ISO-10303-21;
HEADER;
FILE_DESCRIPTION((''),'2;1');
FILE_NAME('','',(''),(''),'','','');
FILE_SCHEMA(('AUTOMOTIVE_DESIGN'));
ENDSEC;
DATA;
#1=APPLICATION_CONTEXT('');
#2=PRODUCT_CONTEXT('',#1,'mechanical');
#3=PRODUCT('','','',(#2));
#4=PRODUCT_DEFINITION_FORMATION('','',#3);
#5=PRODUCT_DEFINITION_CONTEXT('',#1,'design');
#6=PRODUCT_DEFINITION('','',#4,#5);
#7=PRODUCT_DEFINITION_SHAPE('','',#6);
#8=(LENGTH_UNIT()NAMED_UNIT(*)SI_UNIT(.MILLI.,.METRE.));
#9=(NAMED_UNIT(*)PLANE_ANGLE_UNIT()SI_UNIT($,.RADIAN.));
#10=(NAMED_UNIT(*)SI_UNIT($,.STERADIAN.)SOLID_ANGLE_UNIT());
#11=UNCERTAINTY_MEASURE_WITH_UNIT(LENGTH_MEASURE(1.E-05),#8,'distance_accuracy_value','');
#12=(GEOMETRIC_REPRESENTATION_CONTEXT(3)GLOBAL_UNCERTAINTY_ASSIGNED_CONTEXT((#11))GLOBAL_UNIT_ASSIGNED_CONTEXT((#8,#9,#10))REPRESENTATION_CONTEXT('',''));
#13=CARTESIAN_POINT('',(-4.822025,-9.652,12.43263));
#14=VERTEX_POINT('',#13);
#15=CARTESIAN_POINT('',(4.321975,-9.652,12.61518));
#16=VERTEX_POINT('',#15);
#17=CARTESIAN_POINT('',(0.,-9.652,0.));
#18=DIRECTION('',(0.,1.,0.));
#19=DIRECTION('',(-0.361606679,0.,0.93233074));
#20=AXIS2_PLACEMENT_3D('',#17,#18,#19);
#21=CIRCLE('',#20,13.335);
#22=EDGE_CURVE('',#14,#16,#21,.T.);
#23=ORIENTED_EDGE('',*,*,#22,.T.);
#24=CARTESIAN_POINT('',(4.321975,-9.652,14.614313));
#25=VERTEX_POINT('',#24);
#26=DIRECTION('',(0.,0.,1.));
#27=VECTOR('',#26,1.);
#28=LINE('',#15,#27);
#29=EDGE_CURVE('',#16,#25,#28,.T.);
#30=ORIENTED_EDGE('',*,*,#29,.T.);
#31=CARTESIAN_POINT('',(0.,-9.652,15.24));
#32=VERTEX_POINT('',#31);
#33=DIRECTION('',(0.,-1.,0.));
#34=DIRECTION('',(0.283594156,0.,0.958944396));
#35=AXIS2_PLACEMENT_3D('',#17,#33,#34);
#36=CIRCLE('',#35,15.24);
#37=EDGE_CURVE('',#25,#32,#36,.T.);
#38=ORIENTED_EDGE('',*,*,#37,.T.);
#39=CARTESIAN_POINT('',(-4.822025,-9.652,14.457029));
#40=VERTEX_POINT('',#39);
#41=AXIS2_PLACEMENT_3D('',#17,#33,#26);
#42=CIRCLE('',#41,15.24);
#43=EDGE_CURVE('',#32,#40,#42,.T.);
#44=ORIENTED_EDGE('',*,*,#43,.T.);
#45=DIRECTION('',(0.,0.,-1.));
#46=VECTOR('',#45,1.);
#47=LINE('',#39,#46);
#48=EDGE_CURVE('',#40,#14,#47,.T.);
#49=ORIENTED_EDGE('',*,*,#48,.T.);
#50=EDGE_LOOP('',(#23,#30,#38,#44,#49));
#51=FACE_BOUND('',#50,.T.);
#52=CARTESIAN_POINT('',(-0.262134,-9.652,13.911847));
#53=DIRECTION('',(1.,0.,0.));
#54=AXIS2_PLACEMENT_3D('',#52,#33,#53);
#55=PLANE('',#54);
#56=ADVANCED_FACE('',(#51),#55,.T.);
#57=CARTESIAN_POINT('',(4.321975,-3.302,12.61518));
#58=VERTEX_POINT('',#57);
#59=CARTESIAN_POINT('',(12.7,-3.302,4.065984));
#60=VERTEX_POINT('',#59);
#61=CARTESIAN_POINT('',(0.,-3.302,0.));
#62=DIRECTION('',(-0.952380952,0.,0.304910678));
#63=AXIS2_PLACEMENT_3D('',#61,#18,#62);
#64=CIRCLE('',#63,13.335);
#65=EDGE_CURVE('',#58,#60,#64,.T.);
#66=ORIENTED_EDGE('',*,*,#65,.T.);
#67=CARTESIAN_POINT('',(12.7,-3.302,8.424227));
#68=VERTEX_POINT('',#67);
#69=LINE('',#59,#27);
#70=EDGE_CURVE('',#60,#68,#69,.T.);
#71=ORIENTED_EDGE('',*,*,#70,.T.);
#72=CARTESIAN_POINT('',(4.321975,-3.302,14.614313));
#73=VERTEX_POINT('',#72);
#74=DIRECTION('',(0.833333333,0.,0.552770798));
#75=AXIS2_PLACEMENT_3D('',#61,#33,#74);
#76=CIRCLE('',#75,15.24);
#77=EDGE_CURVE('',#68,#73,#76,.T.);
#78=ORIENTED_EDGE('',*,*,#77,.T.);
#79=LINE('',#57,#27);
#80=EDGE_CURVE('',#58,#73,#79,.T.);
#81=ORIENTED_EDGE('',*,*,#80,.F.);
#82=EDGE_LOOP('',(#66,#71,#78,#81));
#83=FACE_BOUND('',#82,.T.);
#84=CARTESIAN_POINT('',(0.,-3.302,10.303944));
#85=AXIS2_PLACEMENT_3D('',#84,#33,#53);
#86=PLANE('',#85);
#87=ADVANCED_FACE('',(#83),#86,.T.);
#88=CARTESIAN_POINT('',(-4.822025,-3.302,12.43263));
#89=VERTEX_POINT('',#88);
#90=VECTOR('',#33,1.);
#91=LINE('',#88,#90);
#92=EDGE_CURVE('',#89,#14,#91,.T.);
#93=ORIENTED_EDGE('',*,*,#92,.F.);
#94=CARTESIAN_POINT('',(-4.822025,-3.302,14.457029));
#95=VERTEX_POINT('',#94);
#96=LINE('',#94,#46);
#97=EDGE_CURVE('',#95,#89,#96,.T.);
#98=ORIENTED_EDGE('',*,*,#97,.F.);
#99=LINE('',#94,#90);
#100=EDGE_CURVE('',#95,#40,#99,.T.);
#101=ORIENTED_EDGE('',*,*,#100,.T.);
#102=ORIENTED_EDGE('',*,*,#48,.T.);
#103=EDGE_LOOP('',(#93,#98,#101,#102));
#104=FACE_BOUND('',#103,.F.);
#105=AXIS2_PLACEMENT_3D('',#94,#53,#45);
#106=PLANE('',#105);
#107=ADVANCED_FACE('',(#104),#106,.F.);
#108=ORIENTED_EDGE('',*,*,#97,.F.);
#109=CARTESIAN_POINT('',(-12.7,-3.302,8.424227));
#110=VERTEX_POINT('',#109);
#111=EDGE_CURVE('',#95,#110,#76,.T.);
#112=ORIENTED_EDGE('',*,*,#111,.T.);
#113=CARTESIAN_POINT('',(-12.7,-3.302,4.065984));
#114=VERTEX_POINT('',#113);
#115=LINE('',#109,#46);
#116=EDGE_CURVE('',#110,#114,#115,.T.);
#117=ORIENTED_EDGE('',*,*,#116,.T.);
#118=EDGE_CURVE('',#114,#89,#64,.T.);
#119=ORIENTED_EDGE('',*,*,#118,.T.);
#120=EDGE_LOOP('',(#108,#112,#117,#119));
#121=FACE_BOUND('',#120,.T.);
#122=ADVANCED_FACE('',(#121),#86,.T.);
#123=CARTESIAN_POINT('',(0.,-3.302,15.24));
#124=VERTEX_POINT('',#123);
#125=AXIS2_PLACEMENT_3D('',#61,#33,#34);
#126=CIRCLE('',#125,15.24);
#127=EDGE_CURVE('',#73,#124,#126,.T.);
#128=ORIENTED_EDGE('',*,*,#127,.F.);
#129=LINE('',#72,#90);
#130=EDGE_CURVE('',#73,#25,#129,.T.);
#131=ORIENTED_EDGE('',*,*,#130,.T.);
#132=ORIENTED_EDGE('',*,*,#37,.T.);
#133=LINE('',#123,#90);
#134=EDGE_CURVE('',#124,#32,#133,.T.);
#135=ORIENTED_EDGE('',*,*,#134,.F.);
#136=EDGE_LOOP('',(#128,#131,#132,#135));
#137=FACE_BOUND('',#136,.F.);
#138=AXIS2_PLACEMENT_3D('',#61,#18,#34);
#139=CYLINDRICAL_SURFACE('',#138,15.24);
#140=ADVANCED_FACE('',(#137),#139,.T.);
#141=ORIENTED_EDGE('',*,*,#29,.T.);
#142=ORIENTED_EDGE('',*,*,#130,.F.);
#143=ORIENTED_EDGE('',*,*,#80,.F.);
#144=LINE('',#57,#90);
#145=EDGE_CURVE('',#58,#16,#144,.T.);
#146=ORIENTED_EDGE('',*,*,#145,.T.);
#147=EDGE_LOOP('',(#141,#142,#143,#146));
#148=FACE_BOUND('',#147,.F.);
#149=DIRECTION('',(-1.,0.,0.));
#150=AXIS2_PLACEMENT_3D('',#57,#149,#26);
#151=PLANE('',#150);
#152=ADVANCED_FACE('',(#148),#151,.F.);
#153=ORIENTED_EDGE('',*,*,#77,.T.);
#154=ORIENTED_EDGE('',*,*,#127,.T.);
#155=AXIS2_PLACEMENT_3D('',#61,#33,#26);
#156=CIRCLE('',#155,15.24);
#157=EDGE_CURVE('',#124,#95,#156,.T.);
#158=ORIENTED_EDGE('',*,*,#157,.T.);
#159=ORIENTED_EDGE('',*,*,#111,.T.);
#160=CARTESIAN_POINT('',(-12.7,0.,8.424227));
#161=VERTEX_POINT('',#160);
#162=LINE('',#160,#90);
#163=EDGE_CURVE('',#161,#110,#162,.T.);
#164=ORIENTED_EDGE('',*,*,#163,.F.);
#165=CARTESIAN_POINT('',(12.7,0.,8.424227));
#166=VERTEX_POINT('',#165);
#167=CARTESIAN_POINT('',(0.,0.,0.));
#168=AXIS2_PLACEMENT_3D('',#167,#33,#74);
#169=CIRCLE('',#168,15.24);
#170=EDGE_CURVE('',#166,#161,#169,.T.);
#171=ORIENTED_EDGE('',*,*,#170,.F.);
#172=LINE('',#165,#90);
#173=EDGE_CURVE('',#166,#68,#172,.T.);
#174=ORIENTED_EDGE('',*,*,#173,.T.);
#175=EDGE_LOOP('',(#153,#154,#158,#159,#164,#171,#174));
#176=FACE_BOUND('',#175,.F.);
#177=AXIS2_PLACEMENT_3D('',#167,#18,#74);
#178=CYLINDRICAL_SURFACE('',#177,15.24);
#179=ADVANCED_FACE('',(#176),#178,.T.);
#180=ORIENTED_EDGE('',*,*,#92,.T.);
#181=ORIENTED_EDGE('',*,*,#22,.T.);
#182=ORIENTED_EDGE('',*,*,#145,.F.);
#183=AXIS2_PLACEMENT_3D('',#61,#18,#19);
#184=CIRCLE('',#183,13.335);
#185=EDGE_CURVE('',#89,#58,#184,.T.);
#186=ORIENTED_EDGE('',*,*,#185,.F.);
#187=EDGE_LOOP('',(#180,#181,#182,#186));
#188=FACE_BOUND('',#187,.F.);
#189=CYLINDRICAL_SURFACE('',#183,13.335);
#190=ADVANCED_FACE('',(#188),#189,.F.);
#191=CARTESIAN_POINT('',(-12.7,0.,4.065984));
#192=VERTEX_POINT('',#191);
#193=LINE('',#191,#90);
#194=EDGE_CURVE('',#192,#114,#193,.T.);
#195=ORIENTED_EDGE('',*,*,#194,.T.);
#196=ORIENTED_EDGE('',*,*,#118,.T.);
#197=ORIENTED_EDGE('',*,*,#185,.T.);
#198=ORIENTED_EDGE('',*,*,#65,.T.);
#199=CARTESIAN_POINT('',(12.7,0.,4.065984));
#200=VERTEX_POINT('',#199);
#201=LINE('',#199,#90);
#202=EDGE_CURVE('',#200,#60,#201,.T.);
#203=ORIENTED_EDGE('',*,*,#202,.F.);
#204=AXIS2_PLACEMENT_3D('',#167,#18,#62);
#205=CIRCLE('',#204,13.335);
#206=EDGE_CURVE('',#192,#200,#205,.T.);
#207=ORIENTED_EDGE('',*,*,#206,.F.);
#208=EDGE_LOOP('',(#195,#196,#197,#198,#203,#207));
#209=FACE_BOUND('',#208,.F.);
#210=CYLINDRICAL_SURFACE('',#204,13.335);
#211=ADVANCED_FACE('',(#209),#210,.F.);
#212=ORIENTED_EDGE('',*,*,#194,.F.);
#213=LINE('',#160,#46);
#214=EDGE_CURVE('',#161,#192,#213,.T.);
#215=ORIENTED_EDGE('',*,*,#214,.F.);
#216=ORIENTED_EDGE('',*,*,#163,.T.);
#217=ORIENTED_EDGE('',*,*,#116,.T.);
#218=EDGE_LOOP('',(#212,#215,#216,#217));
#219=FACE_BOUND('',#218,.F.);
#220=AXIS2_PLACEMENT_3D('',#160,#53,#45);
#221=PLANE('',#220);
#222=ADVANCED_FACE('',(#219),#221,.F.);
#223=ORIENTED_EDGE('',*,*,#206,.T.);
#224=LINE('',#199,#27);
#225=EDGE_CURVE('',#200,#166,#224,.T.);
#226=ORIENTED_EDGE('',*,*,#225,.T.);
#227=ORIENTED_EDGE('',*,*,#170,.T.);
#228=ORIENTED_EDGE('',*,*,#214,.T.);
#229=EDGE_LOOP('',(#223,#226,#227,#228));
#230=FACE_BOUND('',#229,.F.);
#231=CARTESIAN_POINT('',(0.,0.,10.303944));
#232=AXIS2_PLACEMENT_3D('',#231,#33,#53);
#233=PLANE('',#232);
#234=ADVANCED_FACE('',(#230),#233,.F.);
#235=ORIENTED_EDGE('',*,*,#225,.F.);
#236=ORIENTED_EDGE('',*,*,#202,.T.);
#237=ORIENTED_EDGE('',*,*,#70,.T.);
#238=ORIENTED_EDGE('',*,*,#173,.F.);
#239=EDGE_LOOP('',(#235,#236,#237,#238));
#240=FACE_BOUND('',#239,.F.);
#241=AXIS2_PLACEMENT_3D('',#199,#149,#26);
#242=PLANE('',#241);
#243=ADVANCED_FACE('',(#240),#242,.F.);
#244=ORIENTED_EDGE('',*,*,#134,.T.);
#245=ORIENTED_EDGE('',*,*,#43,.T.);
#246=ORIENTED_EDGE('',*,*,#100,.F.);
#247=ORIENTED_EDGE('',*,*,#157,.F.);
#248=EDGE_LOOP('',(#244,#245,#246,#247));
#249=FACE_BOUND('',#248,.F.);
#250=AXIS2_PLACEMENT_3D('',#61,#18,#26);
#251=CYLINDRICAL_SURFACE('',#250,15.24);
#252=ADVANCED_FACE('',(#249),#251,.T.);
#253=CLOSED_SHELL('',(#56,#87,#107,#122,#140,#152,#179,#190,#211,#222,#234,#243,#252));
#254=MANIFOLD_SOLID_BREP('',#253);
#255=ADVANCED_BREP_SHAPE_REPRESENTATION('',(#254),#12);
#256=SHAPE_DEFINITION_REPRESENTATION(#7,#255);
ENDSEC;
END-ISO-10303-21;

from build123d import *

# Parameters (mm, degrees)
F1_DEPTH = 3.302
F3_DEPTH = 6.35


with BuildPart() as f1:
    # F0 (on Front) → F1 (new body)
    with BuildSketch(Plane.XZ):
        with BuildLine():
            Line((12.7, 4.0659838908), (12.7, 8.4242269675))
            ThreePointArc((12.7, 8.4242269675), (0, 15.24), (-12.7, 8.4242269675))
            Line((-12.7, 8.4242269675), (-12.7, 4.0659838908))
            ThreePointArc((-12.7, 4.0659838908), (0, 13.335), (12.7, 4.0659838908))
        make_face()
    extrude(amount=F1_DEPTH)

    # F2 (on face) → F3 (join)
    with BuildSketch(Plane.XZ.offset(3.302)):
        with BuildLine():
            ThreePointArc((4.3219749297, 14.6143125978), (2.1835150571, 15.0827670537), (0, 15.24))
            ThreePointArc((0, 15.24), (-2.4425893067, 15.0429836628), (-4.8220250703, 14.4570285405))
            Line((-4.8220250703, 14.4570285405), (-4.8220250703, 12.4326304225))
            ThreePointArc((-4.8220250703, 12.4326304225), (-0.2661645943, 13.3323434327), (4.3219749297, 12.6151796542))
            Line((4.3219749297, 12.6151796542), (4.3219749297, 14.6143125978))
        make_face()
    extrude(amount=F3_DEPTH)


solid = f1.part
